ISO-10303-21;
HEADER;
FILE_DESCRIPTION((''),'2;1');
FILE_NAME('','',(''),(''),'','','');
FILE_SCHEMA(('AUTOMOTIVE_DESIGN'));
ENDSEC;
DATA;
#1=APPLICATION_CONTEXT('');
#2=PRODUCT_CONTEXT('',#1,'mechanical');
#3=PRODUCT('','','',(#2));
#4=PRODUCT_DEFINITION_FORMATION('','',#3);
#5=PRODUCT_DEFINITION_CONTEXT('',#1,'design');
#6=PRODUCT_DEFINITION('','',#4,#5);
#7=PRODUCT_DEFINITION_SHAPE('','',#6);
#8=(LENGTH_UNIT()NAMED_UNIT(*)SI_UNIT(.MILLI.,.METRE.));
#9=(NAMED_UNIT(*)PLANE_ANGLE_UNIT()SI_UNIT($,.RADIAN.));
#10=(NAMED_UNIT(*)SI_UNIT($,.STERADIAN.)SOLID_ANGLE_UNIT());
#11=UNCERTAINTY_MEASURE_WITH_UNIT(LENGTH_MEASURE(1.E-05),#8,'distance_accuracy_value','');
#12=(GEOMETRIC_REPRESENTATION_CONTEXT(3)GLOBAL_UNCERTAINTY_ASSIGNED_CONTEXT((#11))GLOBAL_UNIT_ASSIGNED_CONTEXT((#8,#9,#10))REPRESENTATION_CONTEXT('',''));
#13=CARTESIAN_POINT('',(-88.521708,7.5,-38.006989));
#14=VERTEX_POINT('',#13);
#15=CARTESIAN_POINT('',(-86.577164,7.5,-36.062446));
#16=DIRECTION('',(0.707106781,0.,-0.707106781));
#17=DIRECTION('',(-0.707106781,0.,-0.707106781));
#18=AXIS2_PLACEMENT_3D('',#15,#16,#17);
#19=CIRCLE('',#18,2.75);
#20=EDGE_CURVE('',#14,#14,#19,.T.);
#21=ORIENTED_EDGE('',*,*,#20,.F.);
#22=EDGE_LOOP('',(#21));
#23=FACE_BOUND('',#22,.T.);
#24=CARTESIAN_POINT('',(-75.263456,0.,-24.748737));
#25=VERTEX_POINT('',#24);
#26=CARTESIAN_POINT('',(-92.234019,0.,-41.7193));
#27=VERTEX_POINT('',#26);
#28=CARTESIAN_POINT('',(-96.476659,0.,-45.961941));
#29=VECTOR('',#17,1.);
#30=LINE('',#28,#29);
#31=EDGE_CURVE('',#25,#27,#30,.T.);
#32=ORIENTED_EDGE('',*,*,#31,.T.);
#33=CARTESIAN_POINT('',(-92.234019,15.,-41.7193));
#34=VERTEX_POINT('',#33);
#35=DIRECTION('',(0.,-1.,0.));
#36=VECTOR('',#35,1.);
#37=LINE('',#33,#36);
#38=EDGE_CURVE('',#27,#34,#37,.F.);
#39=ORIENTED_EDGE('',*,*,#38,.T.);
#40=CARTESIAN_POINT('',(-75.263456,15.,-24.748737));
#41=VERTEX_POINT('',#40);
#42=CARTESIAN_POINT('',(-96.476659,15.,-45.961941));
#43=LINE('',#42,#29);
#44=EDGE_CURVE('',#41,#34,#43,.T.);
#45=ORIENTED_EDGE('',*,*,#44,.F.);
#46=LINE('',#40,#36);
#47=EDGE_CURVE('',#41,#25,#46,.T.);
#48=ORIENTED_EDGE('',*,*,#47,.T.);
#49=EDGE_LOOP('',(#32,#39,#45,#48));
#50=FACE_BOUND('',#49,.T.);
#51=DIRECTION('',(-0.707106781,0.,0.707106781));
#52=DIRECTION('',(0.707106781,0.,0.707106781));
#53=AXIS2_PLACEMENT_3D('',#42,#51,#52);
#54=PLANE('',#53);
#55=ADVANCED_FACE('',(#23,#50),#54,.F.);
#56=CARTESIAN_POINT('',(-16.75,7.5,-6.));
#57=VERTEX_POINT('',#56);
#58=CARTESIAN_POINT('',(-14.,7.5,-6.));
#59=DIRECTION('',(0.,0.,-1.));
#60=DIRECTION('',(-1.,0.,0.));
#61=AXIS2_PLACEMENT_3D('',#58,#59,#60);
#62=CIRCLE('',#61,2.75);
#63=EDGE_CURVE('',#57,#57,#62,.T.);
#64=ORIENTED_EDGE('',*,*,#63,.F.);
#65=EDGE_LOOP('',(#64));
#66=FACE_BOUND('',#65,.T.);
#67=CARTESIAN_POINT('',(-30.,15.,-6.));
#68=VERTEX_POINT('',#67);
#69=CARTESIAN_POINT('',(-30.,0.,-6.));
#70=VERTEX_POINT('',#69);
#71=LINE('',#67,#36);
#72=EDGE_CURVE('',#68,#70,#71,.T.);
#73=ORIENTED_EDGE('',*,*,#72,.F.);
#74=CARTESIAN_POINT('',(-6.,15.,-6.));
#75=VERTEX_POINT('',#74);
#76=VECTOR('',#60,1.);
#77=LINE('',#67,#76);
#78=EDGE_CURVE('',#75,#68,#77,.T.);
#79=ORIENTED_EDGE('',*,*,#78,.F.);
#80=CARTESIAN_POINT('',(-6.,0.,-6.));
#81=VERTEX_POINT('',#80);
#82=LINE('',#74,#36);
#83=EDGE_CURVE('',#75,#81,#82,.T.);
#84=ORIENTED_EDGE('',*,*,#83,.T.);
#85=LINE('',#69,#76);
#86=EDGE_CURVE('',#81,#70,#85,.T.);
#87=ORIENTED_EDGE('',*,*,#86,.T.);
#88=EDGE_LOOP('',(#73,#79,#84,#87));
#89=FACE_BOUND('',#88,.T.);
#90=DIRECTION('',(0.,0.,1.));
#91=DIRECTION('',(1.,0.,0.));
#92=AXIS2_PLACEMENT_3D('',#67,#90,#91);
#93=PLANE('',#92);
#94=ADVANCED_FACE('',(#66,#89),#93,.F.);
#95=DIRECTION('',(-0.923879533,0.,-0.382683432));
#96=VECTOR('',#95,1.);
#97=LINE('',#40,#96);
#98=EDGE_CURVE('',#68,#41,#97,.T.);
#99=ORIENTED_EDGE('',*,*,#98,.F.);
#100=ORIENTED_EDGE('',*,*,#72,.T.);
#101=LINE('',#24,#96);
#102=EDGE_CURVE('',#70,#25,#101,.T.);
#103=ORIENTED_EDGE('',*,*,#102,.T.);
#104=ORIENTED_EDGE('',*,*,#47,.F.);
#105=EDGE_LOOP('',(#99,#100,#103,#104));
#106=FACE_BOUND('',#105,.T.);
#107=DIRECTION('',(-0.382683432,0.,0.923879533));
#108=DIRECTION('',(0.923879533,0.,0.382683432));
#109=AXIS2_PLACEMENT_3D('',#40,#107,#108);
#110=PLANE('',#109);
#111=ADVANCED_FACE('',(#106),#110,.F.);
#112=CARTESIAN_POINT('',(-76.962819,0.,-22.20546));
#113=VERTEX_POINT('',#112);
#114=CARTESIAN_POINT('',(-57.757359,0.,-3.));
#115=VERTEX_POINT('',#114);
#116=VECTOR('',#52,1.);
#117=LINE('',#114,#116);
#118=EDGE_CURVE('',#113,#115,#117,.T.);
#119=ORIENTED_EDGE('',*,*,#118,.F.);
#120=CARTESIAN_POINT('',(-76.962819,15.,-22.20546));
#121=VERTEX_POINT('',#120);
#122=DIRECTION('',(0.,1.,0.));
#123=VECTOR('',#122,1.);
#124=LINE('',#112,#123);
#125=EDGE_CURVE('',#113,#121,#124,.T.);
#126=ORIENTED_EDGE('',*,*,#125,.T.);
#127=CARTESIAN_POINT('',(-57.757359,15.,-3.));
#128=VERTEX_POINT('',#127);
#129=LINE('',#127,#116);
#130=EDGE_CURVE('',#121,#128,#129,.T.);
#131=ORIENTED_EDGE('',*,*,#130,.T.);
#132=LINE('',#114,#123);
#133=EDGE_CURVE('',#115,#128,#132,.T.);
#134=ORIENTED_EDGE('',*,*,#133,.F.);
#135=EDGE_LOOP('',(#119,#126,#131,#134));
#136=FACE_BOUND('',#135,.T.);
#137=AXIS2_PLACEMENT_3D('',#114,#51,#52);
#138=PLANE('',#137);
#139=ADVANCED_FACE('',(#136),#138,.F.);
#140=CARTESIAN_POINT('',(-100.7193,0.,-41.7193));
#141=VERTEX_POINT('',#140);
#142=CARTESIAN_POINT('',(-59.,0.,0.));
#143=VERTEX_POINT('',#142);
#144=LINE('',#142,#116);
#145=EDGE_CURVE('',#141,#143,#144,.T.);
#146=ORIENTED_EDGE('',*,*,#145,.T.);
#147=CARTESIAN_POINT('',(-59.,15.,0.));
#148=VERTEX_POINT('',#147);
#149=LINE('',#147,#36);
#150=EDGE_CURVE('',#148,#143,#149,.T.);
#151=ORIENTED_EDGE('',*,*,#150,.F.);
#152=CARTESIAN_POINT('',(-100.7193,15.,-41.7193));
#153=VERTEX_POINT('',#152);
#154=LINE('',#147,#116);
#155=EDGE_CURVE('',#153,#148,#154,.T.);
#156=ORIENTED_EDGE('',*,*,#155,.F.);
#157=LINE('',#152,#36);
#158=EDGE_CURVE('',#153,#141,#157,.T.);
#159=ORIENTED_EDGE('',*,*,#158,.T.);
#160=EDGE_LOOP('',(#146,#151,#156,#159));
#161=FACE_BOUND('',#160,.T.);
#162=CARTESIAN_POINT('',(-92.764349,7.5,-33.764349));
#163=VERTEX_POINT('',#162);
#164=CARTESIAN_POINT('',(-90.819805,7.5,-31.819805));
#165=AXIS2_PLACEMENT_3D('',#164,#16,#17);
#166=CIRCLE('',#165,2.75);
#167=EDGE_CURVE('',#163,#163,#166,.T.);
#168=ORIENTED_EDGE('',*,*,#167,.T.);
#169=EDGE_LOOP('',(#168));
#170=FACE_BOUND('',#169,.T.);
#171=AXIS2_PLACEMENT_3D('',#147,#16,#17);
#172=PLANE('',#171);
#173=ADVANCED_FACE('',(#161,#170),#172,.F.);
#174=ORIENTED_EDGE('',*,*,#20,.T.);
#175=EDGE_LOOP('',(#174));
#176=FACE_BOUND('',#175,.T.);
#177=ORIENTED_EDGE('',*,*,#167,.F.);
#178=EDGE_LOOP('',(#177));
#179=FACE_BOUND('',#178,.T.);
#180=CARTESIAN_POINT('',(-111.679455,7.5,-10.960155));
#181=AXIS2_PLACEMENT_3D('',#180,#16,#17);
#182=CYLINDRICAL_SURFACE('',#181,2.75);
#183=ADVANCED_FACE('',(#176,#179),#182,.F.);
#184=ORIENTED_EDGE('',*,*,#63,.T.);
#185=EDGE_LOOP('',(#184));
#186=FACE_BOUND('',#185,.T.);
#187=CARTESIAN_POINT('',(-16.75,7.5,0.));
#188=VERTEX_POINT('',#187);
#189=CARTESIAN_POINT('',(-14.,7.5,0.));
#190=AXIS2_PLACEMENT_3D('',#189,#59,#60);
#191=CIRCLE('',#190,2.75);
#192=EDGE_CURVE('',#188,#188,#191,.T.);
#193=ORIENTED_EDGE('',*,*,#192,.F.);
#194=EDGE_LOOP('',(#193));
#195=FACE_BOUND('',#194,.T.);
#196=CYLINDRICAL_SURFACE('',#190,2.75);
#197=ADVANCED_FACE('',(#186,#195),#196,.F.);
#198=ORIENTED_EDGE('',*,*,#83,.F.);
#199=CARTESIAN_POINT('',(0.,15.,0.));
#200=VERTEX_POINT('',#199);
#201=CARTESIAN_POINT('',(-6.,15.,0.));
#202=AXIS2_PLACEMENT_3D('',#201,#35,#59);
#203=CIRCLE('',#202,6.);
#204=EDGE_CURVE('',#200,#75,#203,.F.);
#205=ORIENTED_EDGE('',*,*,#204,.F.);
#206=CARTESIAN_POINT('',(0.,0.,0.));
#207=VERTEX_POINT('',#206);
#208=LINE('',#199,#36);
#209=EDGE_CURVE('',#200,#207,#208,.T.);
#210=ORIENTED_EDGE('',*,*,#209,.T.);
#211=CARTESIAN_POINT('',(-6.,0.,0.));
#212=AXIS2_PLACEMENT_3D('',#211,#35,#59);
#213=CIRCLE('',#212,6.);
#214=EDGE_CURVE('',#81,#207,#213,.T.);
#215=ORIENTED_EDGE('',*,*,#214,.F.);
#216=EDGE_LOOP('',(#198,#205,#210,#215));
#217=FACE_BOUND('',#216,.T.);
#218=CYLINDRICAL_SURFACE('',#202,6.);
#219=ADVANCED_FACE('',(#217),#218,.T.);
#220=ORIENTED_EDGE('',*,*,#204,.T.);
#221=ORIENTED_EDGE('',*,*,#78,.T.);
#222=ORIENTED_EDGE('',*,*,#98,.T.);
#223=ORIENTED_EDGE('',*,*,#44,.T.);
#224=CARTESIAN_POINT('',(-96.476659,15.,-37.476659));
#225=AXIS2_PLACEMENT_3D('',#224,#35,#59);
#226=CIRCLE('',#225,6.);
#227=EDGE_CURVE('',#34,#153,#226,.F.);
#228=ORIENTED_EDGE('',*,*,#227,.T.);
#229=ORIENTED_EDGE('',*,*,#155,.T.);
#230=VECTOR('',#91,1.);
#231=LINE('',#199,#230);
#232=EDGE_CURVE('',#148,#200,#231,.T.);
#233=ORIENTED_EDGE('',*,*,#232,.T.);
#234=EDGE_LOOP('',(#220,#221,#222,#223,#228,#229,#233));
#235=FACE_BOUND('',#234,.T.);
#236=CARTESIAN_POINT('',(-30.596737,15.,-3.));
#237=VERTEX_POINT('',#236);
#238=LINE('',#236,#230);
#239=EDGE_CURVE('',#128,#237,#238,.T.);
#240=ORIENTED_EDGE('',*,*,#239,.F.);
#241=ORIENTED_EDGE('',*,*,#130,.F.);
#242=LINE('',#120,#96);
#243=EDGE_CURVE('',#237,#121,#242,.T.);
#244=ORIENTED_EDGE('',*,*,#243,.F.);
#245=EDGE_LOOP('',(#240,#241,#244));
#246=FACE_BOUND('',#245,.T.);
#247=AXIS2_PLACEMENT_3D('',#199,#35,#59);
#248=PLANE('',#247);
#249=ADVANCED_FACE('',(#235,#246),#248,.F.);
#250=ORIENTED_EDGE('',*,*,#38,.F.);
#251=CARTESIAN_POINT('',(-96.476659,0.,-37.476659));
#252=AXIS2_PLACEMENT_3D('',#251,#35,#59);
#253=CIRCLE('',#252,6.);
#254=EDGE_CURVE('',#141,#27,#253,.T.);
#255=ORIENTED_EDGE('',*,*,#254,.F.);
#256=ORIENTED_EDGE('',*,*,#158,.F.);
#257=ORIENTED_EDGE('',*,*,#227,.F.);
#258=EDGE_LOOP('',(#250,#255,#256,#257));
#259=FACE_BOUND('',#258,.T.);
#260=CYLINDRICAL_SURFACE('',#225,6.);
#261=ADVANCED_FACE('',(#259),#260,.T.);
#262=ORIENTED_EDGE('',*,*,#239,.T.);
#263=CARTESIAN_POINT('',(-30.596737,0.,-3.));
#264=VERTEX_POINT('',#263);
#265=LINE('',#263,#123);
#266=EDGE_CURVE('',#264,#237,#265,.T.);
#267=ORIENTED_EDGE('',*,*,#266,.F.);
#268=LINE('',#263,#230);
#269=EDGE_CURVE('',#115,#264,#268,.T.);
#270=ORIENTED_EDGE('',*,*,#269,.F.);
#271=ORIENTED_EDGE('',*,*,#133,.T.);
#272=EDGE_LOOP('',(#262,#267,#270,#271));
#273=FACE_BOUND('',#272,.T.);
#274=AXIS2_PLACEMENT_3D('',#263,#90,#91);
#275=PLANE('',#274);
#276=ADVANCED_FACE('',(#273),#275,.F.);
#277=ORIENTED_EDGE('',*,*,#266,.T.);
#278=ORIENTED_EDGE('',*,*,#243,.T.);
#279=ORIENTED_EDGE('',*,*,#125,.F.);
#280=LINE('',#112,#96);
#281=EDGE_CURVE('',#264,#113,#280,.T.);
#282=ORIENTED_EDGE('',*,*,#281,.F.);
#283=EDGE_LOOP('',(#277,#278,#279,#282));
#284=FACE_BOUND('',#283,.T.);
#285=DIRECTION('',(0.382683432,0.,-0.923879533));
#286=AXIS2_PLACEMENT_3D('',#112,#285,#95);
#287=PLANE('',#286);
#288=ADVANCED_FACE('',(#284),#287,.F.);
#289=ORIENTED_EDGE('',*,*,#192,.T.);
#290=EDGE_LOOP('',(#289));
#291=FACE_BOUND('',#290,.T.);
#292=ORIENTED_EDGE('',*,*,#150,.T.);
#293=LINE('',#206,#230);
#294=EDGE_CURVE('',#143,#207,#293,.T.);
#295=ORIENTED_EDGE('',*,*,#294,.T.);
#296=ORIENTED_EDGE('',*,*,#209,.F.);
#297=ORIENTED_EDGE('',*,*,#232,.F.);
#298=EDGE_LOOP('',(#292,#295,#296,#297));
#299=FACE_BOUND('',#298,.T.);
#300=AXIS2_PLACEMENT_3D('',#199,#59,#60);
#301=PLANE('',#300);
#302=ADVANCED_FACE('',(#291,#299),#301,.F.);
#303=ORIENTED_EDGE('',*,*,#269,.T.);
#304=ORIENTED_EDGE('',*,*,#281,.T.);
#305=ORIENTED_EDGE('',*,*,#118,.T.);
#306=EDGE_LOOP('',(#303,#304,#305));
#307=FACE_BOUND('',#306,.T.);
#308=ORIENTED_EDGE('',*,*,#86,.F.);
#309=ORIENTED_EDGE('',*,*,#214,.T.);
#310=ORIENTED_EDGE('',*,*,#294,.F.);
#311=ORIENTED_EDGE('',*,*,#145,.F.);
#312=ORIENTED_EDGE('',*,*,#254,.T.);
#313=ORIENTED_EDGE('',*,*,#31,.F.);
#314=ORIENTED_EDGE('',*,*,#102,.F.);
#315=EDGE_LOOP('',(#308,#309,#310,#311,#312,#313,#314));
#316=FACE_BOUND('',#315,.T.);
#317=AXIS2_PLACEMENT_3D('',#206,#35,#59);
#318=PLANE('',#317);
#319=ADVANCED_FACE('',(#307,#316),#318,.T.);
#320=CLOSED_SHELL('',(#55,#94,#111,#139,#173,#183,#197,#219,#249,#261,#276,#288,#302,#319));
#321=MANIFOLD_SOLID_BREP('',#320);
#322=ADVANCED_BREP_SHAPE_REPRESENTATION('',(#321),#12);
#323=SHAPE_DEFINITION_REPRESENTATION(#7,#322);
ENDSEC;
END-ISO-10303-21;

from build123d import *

# Parameters (mm, degrees)
BOSS_EXTRUDE1_DEPTH = 15
FILLET1_R           = 6
CUT_EXTRUDE1_DEPTH  = 111.72308217
SKETCH3_R           = 2.75
CUT_EXTRUDE2_DEPTH  = 109.507513635
SKETCH4_R           = 2.75
CUT_EXTRUDE3_DEPTH  = 104.169159776


with BuildPart() as part:
    # Sketch1 → Boss-Extrude1 (new body)
    with BuildSketch(Plane(origin=(0, 0, 0), x_dir=(1, 0, 0), z_dir=(0, 1, 0))):
        Polygon((0, 0), (-59, 0), (-100.71930009, 41.71930009), (-96.476659403, 45.961940777), (-75.263455967, 24.748737342), (-30, 6), (0, 6), align=None)
    extrude(amount=BOSS_EXTRUDE1_DEPTH)

    # Fillet1
    fillet1_edges = [part.edges().sort_by_distance(p)[0] for p in [
        (-96.476659403, 7.5, -45.961940777),
        (0, 7.5, -6),
    ]]
    fillet(fillet1_edges, radius=FILLET1_R - 0.0001)  # a hair under: the kernel refuses the full size

    # Sketch2 → Cut-Extrude1 (cut, through all)
    with BuildSketch(Plane(origin=(0, 15, 0), x_dir=(1, 0, 0), z_dir=(0, 1, 0))):
        Polygon((-76.962819459, 22.205460146), (-30.596737102, 3), (-57.757359313, 3), align=None)
    extrude(amount=-CUT_EXTRUDE1_DEPTH, mode=Mode.SUBTRACT)

    # Sketch3 → Cut-Extrude2 (cut, through all)
    with BuildSketch(Plane(origin=(0, 0, -6), x_dir=(-1, 0, 0), z_dir=(0, 0, -1))):
        with Locations((14, 7.5)):
            Circle(SKETCH3_R)
    extrude(amount=-CUT_EXTRUDE2_DEPTH, mode=Mode.SUBTRACT)

    # Sketch4 → Cut-Extrude3 (cut, through all)
    with BuildSketch(Plane(origin=(-25.257359313, 0, 25.257359313), x_dir=(-0.7071067811865465, 0, -0.7071067811865487), z_dir=(0.7071067811865487, 0, -0.7071067811865465))):
        with Locations((86.71930009, 7.5)):
            Circle(SKETCH4_R)
    extrude(amount=-CUT_EXTRUDE3_DEPTH, mode=Mode.SUBTRACT)


solid = part.part
